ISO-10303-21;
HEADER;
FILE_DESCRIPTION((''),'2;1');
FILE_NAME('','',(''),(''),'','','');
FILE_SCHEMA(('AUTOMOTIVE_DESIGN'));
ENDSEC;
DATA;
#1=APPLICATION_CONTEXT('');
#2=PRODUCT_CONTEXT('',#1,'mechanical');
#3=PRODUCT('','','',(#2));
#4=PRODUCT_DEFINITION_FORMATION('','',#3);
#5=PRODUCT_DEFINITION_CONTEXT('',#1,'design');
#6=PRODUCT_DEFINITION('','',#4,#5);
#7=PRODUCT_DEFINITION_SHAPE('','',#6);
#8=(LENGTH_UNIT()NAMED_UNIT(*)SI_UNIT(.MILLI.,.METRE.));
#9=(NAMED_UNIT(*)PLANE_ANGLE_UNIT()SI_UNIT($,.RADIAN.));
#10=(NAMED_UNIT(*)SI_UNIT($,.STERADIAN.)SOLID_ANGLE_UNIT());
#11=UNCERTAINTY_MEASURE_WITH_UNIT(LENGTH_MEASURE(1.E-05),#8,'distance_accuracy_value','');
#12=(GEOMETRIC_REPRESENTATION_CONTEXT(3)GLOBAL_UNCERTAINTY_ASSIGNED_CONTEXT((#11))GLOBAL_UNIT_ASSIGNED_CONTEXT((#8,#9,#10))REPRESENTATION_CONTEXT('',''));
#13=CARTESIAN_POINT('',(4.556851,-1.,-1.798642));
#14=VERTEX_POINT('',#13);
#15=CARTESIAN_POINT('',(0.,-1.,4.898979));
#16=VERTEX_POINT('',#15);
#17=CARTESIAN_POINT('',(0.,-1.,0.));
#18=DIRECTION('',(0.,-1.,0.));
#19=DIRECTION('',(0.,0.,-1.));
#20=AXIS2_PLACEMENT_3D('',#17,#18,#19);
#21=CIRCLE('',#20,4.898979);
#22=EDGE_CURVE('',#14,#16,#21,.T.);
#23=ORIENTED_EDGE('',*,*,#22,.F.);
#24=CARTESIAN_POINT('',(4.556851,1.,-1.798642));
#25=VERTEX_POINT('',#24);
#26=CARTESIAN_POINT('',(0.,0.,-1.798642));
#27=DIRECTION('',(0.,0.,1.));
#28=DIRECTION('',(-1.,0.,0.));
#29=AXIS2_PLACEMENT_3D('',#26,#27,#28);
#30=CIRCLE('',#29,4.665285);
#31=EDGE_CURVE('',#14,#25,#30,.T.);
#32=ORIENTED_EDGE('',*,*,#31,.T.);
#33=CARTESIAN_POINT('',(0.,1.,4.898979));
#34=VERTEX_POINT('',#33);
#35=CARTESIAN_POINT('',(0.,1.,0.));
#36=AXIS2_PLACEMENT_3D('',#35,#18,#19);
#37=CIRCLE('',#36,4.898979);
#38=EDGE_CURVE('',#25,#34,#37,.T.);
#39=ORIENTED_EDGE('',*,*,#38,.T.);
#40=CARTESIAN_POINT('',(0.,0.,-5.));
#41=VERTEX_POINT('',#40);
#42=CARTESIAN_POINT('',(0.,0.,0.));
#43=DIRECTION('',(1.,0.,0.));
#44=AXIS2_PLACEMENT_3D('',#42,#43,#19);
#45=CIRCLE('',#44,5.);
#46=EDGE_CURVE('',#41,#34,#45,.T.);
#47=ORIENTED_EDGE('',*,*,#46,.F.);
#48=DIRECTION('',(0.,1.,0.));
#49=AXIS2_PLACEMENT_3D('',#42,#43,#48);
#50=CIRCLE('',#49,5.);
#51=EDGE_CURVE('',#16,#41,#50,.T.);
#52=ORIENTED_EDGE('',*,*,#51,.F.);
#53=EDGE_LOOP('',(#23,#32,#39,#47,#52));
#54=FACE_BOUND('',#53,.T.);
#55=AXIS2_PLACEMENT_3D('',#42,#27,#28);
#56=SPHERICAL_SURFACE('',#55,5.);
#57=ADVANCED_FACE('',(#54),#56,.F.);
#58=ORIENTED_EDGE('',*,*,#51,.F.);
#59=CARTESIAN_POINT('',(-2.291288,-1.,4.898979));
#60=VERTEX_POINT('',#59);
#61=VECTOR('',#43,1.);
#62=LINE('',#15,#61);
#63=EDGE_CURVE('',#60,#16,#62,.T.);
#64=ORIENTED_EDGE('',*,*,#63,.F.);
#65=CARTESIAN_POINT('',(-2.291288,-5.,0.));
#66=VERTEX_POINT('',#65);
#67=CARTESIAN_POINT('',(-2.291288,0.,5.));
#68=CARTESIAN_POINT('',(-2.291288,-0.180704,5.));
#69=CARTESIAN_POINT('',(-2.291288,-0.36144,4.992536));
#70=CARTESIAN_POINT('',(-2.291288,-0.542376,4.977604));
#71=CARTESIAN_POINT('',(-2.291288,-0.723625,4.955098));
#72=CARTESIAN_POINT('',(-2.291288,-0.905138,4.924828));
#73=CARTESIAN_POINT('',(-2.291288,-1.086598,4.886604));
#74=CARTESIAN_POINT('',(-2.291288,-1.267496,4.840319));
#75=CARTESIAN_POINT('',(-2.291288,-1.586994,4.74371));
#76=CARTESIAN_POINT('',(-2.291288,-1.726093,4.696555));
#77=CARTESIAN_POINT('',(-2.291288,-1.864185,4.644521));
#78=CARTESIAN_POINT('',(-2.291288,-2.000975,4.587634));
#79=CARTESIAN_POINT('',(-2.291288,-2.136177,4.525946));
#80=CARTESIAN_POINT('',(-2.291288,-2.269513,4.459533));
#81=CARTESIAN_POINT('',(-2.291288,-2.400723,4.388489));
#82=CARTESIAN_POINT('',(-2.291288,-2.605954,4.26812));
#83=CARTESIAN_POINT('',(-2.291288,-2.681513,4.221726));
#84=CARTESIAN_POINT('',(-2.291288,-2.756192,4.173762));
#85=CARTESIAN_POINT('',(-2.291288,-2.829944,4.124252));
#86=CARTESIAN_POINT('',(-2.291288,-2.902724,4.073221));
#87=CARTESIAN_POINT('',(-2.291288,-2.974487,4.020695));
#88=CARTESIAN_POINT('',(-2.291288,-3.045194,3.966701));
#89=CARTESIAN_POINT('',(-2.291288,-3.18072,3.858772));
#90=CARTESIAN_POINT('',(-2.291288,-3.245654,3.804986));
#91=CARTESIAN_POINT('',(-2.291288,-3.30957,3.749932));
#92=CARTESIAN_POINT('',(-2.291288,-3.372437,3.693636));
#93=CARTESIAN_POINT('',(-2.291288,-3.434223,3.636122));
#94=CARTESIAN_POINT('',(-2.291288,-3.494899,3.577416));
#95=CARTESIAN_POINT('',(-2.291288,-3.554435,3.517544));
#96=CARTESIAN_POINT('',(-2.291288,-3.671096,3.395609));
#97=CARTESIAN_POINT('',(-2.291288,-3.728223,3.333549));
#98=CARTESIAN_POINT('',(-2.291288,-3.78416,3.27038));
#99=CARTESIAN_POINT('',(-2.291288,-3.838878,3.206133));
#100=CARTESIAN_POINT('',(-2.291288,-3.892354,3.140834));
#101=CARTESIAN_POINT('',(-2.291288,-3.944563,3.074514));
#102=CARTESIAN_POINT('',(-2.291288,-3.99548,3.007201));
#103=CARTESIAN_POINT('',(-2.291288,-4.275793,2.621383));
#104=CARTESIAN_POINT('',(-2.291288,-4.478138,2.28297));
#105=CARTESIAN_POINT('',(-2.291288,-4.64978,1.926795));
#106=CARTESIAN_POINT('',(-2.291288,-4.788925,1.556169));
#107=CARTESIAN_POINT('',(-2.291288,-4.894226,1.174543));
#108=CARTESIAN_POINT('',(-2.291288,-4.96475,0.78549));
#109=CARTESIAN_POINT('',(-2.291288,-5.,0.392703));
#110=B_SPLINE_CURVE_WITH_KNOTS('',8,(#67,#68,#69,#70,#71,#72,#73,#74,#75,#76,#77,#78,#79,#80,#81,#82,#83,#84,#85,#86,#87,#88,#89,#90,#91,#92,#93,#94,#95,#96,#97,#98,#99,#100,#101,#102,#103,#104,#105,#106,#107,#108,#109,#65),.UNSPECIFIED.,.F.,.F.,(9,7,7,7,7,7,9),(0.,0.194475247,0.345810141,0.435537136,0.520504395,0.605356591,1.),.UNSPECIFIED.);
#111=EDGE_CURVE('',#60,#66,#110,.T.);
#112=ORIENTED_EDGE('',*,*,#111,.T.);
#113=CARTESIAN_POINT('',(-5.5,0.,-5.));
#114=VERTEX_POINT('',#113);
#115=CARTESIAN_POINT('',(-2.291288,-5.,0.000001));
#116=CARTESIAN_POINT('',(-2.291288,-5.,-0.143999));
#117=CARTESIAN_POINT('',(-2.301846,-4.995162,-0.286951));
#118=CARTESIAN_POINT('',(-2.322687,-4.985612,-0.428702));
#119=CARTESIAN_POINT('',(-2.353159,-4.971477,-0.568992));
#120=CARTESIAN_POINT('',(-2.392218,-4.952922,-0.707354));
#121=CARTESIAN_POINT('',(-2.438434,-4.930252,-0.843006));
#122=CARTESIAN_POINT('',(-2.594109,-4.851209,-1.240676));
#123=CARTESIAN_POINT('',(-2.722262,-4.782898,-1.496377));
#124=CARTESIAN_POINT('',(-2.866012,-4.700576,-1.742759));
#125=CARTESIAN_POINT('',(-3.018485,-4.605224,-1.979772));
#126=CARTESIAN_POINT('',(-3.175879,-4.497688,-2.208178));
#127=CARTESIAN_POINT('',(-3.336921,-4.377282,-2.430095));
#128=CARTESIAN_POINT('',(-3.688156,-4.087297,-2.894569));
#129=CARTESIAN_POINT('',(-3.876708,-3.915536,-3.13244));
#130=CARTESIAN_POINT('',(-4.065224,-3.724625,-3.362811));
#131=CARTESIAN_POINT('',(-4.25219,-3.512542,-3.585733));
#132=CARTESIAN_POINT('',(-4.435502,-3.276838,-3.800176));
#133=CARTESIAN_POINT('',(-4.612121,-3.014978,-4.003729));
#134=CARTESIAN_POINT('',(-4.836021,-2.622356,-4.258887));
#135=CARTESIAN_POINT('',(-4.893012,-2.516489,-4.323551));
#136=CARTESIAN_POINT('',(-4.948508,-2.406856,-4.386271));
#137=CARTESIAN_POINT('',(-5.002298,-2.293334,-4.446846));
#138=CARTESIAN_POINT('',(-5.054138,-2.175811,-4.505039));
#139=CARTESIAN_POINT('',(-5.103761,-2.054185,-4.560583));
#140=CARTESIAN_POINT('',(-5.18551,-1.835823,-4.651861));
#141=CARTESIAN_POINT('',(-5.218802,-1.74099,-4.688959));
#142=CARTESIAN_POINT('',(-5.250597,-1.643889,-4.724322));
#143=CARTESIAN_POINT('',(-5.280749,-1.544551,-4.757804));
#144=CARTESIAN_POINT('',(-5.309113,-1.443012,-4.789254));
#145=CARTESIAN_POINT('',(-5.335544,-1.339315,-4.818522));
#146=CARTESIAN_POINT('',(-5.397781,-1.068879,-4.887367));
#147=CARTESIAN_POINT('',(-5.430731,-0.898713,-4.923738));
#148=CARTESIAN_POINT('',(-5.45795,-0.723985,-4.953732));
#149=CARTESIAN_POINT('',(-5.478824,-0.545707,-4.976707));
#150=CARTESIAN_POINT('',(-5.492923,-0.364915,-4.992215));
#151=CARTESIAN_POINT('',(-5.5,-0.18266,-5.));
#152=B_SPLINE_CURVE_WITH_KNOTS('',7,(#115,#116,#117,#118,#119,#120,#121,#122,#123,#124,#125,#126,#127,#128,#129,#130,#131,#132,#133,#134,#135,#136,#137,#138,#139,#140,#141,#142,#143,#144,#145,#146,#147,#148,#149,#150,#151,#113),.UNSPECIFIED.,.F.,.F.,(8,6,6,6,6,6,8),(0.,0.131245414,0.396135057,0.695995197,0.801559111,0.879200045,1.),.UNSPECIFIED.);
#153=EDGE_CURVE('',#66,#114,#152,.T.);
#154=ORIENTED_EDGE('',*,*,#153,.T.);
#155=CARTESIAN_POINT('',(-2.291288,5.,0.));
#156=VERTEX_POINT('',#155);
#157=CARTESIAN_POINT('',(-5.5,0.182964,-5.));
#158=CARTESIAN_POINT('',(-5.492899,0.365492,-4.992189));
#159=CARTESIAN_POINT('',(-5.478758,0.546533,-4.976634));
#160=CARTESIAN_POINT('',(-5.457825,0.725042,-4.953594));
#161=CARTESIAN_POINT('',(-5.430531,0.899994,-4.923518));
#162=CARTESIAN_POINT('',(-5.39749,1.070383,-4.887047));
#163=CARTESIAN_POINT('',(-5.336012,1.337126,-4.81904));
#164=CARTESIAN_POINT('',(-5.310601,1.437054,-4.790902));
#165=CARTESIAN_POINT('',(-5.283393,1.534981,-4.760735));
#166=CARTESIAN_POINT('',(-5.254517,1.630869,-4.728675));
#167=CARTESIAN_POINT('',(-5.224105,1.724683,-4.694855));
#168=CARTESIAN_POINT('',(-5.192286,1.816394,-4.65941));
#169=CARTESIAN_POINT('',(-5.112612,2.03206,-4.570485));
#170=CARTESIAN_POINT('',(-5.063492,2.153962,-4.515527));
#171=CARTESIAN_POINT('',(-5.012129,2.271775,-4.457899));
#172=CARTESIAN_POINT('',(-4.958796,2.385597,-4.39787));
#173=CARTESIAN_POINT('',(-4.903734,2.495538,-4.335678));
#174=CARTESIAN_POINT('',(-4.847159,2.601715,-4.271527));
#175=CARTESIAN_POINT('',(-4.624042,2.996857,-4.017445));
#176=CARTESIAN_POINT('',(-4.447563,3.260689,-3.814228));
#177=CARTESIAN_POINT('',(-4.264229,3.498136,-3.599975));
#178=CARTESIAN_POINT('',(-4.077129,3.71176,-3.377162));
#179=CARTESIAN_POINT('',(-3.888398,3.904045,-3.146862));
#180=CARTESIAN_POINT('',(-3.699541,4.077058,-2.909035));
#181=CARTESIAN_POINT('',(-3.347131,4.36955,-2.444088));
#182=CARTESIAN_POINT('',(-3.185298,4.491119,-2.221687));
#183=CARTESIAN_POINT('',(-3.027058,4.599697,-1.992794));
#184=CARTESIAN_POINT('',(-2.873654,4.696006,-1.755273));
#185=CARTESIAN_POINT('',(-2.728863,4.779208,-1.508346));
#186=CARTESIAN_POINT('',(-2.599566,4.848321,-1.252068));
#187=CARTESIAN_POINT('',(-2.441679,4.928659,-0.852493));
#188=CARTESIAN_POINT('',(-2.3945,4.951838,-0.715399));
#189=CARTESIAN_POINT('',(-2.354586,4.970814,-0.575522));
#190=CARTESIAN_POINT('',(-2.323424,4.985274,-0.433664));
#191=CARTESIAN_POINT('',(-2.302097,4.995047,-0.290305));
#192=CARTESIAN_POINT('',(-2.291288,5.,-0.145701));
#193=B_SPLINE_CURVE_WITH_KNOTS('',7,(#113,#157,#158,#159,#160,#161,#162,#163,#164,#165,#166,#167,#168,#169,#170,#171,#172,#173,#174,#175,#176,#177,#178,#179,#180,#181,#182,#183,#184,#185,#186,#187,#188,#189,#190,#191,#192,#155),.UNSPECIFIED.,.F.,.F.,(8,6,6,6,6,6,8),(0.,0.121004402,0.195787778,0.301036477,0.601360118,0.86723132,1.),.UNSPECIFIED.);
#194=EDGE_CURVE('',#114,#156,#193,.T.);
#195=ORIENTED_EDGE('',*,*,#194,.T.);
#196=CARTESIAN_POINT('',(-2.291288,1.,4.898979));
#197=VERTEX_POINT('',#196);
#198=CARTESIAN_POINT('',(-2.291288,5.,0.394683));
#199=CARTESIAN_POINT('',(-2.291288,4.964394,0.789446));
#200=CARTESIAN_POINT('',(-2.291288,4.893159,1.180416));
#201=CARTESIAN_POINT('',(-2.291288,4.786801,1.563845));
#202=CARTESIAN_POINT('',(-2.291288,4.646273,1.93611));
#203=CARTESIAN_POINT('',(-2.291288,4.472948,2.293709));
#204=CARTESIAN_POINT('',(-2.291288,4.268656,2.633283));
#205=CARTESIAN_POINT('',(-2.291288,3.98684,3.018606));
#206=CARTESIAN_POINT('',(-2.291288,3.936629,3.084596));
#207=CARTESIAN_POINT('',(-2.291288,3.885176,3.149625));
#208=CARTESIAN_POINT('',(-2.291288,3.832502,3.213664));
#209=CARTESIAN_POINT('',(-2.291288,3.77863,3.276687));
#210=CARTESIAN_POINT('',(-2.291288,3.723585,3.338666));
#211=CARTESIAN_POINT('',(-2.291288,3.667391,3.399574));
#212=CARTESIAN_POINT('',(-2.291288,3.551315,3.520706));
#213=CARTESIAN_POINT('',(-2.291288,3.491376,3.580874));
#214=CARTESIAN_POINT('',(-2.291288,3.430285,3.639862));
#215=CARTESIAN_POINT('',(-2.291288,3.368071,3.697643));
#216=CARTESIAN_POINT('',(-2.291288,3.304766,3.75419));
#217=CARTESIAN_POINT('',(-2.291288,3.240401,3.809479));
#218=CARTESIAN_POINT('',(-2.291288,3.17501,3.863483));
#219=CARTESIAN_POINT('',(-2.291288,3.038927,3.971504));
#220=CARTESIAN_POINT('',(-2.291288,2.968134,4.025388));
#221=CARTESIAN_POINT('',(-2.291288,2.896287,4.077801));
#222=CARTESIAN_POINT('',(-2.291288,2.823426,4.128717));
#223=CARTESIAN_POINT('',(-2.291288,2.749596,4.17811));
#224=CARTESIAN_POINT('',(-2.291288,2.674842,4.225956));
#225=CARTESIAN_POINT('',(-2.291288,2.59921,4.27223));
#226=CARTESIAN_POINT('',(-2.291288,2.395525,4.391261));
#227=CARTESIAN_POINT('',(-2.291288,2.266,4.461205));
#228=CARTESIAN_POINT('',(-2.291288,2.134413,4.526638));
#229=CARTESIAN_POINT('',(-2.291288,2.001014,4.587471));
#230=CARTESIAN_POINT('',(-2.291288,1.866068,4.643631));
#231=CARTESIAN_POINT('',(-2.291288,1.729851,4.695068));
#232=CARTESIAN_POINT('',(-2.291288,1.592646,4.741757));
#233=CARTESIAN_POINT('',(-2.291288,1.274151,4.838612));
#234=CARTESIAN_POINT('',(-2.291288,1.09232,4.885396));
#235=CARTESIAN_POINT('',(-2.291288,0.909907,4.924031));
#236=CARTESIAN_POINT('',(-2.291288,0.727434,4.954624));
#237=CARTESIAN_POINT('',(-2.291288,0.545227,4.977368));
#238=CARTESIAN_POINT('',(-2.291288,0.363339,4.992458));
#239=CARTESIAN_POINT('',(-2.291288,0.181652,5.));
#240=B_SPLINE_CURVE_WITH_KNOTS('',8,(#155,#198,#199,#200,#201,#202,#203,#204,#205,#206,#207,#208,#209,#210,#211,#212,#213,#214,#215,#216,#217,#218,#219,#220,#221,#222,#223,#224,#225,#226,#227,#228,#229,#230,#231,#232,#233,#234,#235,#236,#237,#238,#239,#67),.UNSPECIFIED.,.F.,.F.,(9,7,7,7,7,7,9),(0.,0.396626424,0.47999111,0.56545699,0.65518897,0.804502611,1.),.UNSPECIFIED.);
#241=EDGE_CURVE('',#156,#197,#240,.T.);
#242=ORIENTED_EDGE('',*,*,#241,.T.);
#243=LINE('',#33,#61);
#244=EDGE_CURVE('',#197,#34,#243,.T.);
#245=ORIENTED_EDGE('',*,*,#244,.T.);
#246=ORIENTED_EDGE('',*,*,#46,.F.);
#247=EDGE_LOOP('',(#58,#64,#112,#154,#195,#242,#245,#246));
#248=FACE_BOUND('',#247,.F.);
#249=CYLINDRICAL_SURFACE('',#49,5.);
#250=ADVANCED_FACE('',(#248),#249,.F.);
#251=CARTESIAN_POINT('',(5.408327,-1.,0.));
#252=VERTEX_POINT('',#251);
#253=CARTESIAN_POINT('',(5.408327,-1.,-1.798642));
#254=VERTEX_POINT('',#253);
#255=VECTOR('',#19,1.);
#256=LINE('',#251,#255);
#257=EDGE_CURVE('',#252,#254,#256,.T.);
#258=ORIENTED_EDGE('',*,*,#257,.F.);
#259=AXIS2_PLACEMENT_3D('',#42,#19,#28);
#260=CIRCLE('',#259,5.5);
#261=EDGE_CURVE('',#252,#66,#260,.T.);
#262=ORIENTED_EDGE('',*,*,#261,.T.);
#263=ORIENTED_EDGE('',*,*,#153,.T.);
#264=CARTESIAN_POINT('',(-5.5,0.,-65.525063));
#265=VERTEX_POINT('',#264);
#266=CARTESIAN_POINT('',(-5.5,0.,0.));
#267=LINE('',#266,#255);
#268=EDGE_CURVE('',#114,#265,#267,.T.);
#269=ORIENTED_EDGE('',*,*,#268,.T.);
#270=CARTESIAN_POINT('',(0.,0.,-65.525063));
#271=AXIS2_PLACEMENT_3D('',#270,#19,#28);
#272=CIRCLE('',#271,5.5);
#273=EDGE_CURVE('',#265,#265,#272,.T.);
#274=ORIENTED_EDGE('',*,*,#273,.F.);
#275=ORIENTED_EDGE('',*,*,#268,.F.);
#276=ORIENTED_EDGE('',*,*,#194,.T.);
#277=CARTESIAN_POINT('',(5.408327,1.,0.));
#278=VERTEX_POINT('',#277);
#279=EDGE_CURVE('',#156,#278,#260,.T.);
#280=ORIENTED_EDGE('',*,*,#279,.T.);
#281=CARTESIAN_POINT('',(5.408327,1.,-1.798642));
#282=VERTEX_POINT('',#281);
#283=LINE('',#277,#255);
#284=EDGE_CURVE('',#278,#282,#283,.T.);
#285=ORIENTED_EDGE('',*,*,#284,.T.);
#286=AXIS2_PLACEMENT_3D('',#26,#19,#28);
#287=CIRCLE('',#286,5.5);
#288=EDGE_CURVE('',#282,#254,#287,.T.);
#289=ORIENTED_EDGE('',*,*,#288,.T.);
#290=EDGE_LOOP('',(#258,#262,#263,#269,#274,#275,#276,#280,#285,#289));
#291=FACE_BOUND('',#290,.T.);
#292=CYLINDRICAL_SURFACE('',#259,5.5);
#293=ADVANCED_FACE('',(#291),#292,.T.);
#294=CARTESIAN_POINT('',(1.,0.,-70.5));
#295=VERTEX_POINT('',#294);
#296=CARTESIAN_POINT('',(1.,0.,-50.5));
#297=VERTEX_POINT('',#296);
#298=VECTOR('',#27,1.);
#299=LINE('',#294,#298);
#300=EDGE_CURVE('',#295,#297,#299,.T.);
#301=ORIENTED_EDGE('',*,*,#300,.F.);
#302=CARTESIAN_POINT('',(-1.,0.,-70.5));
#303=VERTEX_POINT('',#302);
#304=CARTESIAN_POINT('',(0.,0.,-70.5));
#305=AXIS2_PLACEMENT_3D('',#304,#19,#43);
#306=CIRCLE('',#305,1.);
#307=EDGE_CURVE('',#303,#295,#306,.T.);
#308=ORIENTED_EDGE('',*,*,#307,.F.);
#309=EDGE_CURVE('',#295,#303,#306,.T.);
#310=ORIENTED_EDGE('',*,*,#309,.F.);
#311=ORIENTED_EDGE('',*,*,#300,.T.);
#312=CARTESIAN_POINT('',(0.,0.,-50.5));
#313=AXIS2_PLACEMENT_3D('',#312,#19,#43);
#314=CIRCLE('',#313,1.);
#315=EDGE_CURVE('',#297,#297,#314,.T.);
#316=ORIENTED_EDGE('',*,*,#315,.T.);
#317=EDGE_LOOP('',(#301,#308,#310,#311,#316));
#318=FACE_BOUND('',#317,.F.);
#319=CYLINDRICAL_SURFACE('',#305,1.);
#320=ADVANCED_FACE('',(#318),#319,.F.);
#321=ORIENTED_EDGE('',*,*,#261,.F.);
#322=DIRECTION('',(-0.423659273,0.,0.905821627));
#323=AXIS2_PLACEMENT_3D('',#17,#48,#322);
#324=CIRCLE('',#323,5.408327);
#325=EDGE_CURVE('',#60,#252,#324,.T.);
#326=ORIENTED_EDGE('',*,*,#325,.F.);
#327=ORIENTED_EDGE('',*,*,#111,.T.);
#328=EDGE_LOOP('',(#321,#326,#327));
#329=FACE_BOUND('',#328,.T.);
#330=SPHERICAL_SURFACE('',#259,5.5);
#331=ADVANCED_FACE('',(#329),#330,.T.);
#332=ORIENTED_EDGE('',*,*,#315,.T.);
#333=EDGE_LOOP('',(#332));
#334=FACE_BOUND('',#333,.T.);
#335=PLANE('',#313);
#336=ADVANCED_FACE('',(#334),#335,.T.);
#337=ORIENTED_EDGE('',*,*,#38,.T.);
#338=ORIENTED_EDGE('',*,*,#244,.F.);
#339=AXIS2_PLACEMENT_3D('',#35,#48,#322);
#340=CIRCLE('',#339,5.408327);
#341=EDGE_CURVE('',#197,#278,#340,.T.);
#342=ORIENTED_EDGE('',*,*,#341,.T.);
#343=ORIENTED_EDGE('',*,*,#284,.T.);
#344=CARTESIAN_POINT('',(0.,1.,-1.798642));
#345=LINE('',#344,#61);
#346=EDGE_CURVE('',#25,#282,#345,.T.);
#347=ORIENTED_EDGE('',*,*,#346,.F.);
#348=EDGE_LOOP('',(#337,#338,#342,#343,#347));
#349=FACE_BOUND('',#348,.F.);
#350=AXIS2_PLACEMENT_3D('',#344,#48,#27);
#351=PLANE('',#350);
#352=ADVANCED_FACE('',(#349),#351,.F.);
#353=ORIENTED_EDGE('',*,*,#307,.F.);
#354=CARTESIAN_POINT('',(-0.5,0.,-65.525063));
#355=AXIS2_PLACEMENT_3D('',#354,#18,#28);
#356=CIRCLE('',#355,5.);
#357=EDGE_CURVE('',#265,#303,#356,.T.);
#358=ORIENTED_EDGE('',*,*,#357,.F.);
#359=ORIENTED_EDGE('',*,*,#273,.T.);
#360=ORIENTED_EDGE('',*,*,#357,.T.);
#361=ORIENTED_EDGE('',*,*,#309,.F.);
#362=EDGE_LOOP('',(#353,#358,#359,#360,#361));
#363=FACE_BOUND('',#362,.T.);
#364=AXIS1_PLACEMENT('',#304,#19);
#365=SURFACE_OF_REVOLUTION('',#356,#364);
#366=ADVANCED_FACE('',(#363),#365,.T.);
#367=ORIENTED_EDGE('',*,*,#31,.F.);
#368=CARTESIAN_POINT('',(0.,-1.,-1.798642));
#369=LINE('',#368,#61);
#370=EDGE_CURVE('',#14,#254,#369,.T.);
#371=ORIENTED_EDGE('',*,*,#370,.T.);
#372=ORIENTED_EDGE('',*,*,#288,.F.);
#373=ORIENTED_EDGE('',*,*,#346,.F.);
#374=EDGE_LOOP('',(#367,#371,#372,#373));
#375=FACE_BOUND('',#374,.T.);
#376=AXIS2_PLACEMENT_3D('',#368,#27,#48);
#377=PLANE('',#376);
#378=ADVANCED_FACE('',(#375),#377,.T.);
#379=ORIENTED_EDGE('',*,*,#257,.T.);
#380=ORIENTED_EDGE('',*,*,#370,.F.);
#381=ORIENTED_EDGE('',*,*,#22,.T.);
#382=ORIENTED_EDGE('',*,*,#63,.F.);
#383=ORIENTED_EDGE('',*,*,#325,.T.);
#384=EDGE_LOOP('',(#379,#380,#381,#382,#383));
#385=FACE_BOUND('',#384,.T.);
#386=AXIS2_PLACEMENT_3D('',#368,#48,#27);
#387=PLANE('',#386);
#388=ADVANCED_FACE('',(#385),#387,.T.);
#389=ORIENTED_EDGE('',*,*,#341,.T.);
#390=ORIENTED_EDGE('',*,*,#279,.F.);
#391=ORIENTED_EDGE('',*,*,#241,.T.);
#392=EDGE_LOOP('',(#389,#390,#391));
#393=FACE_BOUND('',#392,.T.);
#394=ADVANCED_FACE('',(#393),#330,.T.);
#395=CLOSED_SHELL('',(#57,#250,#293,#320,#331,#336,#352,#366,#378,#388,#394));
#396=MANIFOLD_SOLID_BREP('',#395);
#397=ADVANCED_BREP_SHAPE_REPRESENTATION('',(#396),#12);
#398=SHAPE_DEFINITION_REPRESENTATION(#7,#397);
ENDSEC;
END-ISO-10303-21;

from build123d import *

# Parameters (mm, degrees)
F2_R          = 5
F3_DEPTH      = 5.501
F4_W          = 2
F4_H          = 9
F5_DEPTH      = 12
F5_DEPTH_BACK = 25
F6_R          = 1
F7_DEPTH      = 20


# Not quite as in the source:
# - a fillet or chamfer that OpenCascade refuses, or shapes differently, is made with other operations: its cross-section is extruded or revolved along the edge and cut away or added


with BuildPart() as f1:
    # F0 (on Front) → F1 (revolve)
    with BuildSketch(Plane.XZ):
        with BuildLine():
            Line((0, 5), (0, 5.5))
            ThreePointArc((0, 5.5), (-3.8890872965, 3.8890872965), (-5.5, 0))
            ThreePointArc((-5.5, 0), (-3.8890872965, -3.8890872965), (0, -5.5))
            Line((0, -5.5), (0, -5))
            ThreePointArc((0, -5), (-5, 0), (0, 5))
        make_face()
        with BuildLine():
            Line((0, -70.5), (0, -5.5))
            ThreePointArc((0, -5.5), (-3.8890872965, -3.8890872965), (-5.5, 0))
            Line((-5.5, 0), (-5.5, -70.5))
            Line((-5.5, -70.5), (0, -70.5))
        make_face()
    revolve(axis=Axis((0, 0, -32.5), (0, 0, -1)))

    # F2 (on Right) → F3 (cut, through all)
    with BuildSketch(Plane.YZ):
        Circle(F2_R)
    extrude(amount=-F3_DEPTH, mode=Mode.SUBTRACT)

    # F4 (on Right) → F5 (cut, two sides)
    with BuildSketch(Plane.YZ) as f5_sk:
        with Locations((0, 2.7013579383)):
            Rectangle(F4_W, F4_H)
    extrude(amount=-F5_DEPTH, mode=Mode.SUBTRACT)
    extrude(f5_sk.sketch, amount=F5_DEPTH_BACK, mode=Mode.SUBTRACT)

    # F6 (on face) → F7 (cut)
    with BuildSketch(Plane(origin=(0, 0, -70.5), x_dir=(1, 0, 0), z_dir=(0, 0, -1))):
        Circle(F6_R)
    extrude(amount=-F7_DEPTH, mode=Mode.SUBTRACT)

    # F8: fillet of radius 5 on 1 edges, made by hand

    # F8_s1 → F8_t2 (revolve, cut)
    with BuildSketch(Plane.XZ):
        with BuildLine():
            ThreePointArc((-5.5, -65.5250628145), (-4.2080992435, -68.8791647807), (-1, -70.5))
            Line((-1, -70.5), (-5.5, -70.5))
            Line((-5.5, -70.5), (-5.5, -65.5250628145))
        make_face()
    revolve(axis=Axis((0, 0, -70.5), (0, 0, -1)), mode=Mode.SUBTRACT)


solid = f1.part
